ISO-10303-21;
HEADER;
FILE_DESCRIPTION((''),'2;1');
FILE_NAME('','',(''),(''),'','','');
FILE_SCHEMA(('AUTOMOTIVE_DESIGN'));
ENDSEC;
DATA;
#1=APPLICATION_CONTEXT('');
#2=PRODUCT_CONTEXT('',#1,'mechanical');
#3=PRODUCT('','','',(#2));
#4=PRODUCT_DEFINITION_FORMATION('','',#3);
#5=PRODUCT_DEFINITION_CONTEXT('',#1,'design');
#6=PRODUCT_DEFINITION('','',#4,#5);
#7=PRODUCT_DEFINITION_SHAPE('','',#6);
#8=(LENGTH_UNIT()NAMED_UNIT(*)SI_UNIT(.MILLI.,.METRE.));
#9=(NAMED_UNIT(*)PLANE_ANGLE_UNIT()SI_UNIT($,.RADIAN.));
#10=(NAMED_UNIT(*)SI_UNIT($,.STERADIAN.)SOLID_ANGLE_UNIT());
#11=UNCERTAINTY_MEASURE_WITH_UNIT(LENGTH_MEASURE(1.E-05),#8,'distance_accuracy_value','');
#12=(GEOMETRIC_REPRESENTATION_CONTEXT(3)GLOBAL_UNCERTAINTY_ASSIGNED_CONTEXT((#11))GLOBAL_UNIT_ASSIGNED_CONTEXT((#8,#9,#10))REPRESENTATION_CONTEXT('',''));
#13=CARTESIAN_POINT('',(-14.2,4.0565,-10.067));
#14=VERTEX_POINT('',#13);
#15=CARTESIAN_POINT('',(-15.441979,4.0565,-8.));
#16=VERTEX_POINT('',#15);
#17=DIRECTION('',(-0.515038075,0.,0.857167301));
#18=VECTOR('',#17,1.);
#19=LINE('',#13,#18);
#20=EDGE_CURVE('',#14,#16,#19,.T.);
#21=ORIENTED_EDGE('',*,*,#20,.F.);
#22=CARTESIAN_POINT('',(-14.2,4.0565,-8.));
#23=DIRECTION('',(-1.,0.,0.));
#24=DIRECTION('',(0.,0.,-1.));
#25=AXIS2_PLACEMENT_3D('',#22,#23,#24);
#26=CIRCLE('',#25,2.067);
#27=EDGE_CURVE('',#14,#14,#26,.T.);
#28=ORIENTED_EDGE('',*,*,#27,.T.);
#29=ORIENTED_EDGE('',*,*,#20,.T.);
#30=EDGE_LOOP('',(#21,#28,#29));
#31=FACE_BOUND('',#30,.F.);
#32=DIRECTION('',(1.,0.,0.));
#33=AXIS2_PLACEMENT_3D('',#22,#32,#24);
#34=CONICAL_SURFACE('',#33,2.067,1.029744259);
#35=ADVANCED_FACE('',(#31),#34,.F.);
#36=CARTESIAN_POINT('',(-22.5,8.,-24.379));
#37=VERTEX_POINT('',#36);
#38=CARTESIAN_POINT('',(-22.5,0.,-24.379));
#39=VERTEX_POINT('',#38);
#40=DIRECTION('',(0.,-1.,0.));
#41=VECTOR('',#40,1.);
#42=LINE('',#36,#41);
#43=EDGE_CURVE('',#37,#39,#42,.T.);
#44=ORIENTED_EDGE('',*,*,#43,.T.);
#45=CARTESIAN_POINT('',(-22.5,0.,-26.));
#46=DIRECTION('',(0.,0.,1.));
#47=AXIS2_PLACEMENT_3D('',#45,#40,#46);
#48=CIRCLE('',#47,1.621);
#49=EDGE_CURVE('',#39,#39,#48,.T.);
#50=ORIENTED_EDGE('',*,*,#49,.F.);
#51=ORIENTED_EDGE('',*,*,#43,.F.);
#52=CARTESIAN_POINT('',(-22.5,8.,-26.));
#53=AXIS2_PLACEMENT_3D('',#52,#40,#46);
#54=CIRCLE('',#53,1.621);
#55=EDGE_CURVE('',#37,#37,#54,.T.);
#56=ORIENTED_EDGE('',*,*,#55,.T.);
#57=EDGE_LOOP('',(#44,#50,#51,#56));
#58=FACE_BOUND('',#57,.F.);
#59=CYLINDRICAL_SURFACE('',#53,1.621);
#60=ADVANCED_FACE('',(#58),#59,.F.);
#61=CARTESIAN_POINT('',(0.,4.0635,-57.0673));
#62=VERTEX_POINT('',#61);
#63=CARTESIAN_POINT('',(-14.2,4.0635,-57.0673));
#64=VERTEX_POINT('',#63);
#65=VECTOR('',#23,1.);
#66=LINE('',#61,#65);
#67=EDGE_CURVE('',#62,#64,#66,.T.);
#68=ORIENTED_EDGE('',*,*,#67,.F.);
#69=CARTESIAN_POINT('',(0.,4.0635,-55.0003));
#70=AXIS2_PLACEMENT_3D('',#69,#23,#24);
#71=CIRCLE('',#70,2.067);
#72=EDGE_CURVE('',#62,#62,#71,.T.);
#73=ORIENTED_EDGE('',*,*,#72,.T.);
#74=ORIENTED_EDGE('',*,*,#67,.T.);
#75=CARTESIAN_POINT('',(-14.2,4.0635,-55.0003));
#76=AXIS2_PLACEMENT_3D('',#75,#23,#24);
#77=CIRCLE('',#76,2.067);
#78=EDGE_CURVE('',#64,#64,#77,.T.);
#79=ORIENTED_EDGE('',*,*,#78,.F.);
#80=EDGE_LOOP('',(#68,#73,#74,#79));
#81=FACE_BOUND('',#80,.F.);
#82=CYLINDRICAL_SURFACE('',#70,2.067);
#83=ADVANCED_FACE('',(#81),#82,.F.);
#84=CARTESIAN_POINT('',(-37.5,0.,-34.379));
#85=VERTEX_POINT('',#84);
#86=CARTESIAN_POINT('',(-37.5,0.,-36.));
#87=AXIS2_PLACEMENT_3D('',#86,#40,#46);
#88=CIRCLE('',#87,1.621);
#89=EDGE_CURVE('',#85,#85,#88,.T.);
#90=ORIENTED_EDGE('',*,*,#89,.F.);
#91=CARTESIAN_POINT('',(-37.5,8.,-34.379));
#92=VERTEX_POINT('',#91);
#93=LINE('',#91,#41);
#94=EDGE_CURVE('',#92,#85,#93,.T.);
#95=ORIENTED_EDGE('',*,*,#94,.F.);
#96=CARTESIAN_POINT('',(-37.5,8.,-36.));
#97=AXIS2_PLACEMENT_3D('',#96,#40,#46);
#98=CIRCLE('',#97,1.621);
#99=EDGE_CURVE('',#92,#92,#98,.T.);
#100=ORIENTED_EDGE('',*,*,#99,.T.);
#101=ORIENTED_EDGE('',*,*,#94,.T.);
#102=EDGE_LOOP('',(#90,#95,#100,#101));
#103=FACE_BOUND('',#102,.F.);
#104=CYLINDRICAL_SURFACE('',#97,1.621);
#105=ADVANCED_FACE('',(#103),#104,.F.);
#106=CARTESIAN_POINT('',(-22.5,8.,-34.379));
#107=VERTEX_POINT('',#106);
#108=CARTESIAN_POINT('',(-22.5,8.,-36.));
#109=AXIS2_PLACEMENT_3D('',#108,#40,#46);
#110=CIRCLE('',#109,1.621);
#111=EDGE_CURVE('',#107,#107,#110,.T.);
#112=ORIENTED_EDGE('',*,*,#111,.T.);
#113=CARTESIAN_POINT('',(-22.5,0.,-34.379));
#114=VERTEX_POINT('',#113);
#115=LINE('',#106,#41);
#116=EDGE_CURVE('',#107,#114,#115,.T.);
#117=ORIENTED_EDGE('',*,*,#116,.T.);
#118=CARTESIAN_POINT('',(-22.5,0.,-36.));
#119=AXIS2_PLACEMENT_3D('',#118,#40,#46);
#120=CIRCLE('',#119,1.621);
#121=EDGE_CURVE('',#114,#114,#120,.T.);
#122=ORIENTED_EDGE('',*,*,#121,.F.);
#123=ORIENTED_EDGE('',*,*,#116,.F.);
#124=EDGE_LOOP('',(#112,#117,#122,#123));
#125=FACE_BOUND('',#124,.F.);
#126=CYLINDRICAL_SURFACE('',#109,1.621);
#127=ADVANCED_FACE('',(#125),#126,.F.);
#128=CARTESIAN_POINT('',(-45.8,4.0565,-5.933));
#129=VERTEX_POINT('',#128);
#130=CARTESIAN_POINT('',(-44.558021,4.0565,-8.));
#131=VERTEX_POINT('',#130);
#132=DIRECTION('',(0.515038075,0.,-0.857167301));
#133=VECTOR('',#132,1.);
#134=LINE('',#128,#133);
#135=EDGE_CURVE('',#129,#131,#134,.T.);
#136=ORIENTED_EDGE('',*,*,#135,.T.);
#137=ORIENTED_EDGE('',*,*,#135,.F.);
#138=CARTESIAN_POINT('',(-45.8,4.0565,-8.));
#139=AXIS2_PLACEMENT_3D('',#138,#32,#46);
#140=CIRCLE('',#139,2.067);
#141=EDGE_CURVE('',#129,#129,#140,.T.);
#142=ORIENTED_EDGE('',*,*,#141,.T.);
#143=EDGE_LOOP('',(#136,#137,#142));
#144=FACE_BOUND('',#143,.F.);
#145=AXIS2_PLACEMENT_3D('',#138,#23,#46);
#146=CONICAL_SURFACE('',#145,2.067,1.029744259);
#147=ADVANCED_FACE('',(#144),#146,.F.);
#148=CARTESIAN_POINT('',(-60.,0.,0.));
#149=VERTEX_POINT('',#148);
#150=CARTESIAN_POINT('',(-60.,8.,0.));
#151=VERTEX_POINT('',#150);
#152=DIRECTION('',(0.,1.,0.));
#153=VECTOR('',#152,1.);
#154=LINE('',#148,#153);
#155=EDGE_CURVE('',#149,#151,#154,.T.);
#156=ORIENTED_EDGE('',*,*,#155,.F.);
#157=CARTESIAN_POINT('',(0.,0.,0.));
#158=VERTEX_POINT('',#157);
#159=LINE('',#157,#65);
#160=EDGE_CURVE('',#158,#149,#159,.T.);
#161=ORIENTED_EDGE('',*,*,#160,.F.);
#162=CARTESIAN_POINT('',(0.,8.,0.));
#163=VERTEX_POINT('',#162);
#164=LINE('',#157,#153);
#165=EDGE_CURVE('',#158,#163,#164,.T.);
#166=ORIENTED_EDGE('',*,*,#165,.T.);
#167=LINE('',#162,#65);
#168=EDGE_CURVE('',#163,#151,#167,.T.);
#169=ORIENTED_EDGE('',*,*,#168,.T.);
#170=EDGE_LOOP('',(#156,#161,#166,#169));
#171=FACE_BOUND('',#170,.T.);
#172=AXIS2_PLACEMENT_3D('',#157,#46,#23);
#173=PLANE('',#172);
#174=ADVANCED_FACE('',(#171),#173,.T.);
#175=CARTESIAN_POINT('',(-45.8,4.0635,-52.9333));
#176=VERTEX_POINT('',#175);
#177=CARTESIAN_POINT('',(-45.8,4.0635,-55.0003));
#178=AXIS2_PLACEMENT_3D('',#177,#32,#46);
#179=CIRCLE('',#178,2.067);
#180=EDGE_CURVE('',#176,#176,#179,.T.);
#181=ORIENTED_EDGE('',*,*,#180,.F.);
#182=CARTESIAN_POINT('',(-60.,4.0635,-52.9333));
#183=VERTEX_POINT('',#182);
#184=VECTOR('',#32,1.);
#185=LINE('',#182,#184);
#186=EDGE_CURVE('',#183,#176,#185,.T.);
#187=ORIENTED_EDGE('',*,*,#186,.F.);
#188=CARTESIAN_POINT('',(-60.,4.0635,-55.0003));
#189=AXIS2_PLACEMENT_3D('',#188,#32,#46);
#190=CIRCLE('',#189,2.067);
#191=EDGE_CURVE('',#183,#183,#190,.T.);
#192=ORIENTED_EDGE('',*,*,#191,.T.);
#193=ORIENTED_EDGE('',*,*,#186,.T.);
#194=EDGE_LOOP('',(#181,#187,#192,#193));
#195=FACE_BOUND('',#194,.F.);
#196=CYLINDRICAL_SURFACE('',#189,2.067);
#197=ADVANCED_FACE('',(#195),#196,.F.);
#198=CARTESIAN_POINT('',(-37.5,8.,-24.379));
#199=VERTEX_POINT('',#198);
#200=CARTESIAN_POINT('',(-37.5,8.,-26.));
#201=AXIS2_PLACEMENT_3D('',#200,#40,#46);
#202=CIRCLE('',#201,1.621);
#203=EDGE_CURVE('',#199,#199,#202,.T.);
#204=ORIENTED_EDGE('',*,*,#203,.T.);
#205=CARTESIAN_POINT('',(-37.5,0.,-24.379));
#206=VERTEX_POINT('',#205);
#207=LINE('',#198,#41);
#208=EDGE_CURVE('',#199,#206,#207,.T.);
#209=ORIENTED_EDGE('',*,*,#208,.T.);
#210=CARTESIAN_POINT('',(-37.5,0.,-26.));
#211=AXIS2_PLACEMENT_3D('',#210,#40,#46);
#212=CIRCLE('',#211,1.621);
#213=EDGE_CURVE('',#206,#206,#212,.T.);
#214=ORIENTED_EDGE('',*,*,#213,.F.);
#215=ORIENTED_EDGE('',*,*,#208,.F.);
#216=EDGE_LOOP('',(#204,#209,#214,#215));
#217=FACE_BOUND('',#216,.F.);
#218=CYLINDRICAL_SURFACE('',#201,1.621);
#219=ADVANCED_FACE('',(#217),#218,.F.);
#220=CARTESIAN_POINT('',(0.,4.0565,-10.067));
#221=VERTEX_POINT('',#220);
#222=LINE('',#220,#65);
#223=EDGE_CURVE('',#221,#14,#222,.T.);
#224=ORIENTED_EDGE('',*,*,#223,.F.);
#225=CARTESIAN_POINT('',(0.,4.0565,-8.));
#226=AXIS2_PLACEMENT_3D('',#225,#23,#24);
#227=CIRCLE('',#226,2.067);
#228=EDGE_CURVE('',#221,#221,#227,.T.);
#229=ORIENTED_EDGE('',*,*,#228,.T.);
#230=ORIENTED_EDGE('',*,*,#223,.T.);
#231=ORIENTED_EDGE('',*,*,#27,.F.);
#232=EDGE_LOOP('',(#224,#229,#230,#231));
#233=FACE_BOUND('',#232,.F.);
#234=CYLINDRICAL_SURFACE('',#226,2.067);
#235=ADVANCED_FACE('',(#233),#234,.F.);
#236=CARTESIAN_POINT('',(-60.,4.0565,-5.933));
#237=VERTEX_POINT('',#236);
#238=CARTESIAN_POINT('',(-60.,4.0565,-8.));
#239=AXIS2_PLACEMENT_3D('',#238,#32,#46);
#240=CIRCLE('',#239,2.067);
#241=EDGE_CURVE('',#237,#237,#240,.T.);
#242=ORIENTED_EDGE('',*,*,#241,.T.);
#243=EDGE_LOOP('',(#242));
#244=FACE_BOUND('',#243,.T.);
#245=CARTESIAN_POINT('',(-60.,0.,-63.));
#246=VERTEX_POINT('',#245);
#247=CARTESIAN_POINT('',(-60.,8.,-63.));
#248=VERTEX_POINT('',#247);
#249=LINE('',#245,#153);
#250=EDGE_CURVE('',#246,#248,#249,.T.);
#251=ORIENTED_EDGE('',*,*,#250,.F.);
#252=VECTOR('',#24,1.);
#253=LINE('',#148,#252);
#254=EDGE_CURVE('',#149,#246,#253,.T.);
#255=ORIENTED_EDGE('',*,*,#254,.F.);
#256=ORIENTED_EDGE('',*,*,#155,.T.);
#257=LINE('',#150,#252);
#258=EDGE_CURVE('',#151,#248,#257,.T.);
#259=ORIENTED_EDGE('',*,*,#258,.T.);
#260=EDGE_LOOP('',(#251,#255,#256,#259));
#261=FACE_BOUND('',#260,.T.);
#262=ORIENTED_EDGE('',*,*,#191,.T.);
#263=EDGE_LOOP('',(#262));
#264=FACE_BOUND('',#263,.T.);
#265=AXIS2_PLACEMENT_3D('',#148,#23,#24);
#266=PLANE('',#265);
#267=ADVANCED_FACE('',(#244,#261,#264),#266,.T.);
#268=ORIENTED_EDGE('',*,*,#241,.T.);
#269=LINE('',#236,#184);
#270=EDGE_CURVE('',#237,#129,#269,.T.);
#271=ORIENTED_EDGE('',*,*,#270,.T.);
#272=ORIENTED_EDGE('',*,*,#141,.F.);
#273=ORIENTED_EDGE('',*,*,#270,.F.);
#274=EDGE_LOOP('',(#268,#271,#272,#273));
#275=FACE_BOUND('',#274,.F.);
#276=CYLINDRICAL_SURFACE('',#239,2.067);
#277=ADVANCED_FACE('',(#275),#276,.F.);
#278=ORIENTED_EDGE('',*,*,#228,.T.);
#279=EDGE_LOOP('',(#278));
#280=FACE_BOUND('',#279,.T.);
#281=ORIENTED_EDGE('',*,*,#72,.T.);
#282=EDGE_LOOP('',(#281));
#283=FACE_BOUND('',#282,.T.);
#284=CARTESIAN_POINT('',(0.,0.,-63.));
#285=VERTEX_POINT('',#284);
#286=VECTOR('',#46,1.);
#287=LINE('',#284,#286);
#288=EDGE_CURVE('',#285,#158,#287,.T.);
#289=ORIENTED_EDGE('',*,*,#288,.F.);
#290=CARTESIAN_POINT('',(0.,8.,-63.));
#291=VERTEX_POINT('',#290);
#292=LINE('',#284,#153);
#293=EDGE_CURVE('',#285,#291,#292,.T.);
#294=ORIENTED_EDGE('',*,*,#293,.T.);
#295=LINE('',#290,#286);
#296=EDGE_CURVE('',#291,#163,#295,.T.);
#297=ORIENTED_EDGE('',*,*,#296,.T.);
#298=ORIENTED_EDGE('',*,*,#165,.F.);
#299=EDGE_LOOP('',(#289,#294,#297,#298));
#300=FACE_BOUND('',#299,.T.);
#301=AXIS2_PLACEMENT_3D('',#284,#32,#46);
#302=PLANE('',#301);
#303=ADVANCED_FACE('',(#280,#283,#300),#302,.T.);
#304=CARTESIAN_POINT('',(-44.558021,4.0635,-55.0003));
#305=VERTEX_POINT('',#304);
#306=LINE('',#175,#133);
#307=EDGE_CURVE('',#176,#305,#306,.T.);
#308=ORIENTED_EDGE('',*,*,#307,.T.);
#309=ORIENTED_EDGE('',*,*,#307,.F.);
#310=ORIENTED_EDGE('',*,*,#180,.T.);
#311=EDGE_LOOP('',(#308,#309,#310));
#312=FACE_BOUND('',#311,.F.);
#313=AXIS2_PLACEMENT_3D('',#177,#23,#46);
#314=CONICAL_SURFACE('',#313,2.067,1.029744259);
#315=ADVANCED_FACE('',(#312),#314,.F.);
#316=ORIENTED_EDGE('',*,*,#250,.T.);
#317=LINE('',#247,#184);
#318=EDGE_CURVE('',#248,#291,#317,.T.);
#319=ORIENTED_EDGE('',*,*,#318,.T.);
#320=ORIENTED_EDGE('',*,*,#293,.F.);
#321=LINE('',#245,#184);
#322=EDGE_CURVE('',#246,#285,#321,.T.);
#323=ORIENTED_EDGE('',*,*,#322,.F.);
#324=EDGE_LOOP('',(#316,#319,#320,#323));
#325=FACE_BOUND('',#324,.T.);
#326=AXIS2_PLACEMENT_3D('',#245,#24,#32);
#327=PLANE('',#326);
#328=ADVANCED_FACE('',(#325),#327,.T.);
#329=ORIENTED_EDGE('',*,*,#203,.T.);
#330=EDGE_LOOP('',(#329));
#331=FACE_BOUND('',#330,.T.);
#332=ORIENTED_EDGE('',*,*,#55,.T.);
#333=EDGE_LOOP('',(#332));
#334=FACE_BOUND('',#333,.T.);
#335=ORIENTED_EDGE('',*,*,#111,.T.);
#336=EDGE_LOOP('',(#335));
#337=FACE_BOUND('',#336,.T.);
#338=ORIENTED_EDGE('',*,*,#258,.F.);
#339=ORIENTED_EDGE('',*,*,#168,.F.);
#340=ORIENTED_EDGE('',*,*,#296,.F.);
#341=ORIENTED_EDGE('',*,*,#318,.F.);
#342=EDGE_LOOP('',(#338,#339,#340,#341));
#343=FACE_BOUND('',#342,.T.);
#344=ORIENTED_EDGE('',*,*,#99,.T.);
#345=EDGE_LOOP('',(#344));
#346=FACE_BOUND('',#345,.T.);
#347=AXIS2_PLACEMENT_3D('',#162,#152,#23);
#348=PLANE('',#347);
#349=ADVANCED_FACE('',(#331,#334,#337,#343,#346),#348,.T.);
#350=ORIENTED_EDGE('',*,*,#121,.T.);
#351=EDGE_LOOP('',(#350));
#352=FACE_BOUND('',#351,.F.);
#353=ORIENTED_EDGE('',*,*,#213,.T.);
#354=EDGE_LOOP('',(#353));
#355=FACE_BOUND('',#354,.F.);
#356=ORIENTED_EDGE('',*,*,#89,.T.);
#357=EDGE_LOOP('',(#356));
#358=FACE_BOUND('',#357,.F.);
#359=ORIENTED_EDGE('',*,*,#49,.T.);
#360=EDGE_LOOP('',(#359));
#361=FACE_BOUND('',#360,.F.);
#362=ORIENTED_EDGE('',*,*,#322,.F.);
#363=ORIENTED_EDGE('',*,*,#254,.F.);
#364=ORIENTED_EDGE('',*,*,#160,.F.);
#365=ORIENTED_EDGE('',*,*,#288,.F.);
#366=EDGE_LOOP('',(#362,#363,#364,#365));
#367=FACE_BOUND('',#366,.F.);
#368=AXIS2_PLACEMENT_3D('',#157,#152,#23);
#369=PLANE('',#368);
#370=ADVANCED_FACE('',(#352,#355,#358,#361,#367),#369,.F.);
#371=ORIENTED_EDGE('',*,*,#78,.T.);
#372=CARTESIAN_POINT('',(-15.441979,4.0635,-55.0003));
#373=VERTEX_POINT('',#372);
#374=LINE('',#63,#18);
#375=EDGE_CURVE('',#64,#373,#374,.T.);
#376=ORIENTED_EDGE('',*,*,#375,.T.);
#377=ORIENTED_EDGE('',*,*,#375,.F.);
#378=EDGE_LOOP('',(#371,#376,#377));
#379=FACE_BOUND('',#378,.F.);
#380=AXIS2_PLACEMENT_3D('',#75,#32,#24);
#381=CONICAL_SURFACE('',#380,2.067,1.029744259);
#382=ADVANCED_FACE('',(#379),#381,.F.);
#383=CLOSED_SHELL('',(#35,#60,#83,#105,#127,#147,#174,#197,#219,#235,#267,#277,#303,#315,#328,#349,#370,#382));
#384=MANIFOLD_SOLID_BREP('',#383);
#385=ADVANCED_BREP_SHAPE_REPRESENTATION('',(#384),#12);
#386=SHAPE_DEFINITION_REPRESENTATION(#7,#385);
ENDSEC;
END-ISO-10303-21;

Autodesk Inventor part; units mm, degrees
ref_plane "YZ Plane" through (0, 0, 0) normal (1, 0, 0) x (0, 1, 0)
ref_plane "XZ Plane" through (0, 0, 0) normal (0, 1, 0) x (-1, 0, 0)
ref_plane "XY Plane" through (0, 0, 0) normal (0, 0, 1) x (1, 0, 0)
sketch "Sketch1" plane through (0, 0, 0) normal (0, 1, 0) x (-1, 0, 0)
  line L0 (0, 0) -> (60, 0)
  line L1 (60, 0) -> (60, -63)
  line L2 (60, -63) -> (0, -63)
  line L3 (0, -63) -> (0, 0)
  dimension "d0" = 60
  dimension "d1" = 63
extrude "Extrusion1" add sketch "Sketch1" along normal blind 8
sketch "Esboço2" plane through (0, 8, 0) normal (0, 1, 0) x (1, 0, 0)
  line L0 (0, 63) -> (-60, 63) projected
  line L1 (-60, 63) -> (-60, 0) projected
  line L2 (-60, 0) -> (0, 0) projected
  point P0 (-37.5, 36)
  point P1 (-22.5, 36)
  point P2 (-22.5, 26)
  point P3 (-37.5, 26)
  dimension "d5" = 0
  dimension "d6" = 15
  dimension "d7" = 0
  dimension "d8" = 15
  dimension "d9" = 10
  dimension "d10" = 0
  dimension "d11" = 60
  dimension "d12" = 22.5
  dimension "d20" = 26
hole "Furo1" at (-37.5, 8, -36) at (-22.5, 8, -36) at (-22.5, 8, -26) at (-37.5, 8, -26) direction (0, -1, 0) diameter 3.242 depth 8 thread size "M4x0.7" class "6H" standard "ISO Metric profile"
sketch "Sketch3" plane through (0, 0, -63) normal (0, 0, -1) x (-1, 0, 0)
  point P0 (0, 0)
sketch "Sketch4" plane through (0, 0, 0) normal (1, 0, 0) x (0, 0, -1)
  line L0 (63, 0) -> (63, 8) projected
  line L1 (0, 0) -> (0, 8) projected
  point P0 (55.0003, 4.0635)
  point P1 (8, 4.0565)
  point P2 (63, 4)
  point P3 (0, 4)
  dimension "d21" = 8
  dimension "d22" = 8
hole "Hole2" at (0, 4.0635, -55.0003) at (0, 4.0565, -8) direction (-1, 0, 0) diameter 4.134 depth 14.2 tip angle 118 thread size "M5x0.8" class "6H" standard "ISO Metric profile"
sketch "Sketch5" plane through (-60, 0, -63) normal (-1, 0, 0) x (0, 0, 1)
  circle A0 centre (55, 4.0565) radius 2.067 projected
  circle A1 centre (7.9997, 4.0635) radius 2.067 projected
  point P0 (63, 0)
hole "Hole3" at (-60, 4.0565, -8) at (-60, 4.0635, -55.0003) direction (1, 0, 0) diameter 4.134 depth 14.2 tip angle 118 thread size "M5x0.8" class "6H" standard "ISO Metric profile"
equation "\"d12\" = -0.5 * d6 + 0.5 * d11"
equation "\"d18\" = Thickness"
equation "\"BendRadius\" = Thickness"
equation "\"BendReliefWidth\" = Thickness"
equation "\"BendReliefDepth\" = 0.5 * Thickness"
equation "\"CornerReliefSize\" = 4 * Thickness"
equation "\"MinimumRemnant\" = 2 * Thickness"
equation "\"TransitionRadius\" = BendRadius"
equation "\"JacobiRadiusSize\" = BendRadius"
equation "\"GapSize\" = Thickness"
equation "\"Thickness\" = 0.5"
properties part number "Frente da caixa de susentação" material "Aluminum 6061"
